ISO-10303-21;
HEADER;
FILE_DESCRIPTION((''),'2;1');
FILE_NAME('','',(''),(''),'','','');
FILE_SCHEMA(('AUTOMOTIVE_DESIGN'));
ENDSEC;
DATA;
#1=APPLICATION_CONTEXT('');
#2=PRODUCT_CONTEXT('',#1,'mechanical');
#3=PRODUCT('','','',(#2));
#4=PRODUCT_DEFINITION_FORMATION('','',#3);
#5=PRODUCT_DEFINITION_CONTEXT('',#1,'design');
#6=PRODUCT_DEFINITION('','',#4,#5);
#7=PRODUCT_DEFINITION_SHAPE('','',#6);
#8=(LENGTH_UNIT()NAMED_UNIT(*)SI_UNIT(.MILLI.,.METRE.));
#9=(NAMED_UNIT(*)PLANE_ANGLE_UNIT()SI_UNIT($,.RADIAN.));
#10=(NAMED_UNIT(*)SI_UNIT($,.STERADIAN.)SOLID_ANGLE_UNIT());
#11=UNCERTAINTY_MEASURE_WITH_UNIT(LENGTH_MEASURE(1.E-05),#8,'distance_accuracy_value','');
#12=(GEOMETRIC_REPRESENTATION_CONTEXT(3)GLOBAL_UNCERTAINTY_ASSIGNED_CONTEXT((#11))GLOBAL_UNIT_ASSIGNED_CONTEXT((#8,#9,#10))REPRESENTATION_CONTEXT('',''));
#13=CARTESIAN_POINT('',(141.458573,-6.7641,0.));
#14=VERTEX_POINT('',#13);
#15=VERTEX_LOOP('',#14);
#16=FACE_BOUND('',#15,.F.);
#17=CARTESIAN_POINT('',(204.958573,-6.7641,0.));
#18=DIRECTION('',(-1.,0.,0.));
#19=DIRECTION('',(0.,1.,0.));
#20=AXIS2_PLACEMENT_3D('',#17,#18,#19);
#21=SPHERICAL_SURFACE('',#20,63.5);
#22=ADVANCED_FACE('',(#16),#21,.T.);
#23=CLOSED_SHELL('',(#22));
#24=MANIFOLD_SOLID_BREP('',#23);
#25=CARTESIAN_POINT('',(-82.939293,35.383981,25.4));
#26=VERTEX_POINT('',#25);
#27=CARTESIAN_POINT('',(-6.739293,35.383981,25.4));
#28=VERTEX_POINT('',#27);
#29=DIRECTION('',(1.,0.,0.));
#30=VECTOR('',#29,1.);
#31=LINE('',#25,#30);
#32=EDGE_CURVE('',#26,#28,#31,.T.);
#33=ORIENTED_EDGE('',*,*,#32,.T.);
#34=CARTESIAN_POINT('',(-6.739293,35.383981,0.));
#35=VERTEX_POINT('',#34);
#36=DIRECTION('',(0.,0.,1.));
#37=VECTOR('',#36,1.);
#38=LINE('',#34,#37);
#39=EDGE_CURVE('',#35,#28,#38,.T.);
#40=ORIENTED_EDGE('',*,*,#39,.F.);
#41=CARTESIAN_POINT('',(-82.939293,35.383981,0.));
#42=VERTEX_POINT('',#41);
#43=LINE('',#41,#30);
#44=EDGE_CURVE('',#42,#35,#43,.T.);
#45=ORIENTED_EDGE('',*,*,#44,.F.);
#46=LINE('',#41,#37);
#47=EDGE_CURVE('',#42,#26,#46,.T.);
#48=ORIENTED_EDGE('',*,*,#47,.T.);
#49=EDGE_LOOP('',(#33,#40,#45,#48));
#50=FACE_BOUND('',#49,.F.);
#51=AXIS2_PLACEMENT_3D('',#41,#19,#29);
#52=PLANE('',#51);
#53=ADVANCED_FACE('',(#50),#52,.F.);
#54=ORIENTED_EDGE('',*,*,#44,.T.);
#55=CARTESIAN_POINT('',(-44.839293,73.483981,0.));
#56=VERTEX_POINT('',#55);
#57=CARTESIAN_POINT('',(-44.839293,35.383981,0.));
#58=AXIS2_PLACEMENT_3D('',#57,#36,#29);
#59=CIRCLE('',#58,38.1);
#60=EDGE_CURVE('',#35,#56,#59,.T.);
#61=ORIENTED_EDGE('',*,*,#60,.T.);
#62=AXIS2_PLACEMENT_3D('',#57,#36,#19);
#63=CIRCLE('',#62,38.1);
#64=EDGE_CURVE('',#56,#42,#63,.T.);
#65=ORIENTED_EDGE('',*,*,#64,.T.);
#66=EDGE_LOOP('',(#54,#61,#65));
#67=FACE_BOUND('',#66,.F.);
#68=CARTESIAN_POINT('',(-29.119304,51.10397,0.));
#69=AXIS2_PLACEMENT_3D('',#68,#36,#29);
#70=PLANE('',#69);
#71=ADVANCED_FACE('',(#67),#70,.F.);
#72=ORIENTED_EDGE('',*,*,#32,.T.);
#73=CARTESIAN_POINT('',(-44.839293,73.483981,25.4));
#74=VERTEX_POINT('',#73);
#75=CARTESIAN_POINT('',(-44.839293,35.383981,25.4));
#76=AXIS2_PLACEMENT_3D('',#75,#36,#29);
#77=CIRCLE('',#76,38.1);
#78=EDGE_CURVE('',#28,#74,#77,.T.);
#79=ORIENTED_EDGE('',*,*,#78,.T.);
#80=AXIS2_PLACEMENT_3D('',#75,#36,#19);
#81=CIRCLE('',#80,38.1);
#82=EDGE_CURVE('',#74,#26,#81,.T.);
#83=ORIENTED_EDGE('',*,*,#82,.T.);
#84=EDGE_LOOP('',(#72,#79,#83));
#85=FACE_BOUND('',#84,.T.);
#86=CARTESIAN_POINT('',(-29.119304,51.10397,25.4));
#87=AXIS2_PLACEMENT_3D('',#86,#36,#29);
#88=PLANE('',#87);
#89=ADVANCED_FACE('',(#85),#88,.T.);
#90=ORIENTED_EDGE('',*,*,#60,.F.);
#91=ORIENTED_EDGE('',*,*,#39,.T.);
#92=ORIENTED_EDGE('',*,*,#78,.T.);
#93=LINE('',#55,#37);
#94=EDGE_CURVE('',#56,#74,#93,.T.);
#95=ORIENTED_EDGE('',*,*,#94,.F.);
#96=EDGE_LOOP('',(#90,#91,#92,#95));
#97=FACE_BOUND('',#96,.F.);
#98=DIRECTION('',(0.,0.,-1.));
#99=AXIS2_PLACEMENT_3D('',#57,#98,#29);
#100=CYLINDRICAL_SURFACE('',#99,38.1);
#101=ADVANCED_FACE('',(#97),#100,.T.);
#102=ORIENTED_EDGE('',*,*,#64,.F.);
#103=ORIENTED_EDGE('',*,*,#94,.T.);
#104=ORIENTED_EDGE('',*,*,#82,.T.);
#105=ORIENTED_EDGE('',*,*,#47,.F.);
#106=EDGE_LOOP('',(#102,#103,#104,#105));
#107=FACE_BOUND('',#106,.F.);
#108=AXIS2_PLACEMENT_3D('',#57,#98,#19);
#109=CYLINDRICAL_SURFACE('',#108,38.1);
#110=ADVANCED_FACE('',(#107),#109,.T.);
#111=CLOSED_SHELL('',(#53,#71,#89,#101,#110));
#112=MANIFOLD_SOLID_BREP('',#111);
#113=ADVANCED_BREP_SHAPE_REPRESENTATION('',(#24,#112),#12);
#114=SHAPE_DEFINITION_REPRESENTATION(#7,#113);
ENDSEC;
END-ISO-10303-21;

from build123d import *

# Parameters (mm, degrees)
F1_DEPTH = 25.4


with BuildPart() as f1:
    # F0 (on Top) → F1 (new body)
    with BuildSketch(Plane.XY):
        with BuildLine():
            Line((-44.8392927647, 35.3839807212), (-6.7392927647, 35.3839807212))
            ThreePointArc((-6.7392927647, 35.3839807212), (-17.8985244015, 62.3247490844), (-44.8392927647, 73.4839807212))
            Line((-44.8392927647, 73.4839807212), (-44.8392927647, 35.3839807212))
        make_face()
        with BuildLine():
            Line((-44.8392927647, 35.3839807212), (-44.8392927647, 73.4839807212))
            ThreePointArc((-44.8392927647, 73.4839807212), (-71.7800611279, 62.3247490844), (-82.9392927647, 35.3839807212))
            Line((-82.9392927647, 35.3839807212), (-44.8392927647, 35.3839807212))
        make_face()
    extrude(amount=F1_DEPTH)


with BuildPart() as f3:
    # F2 (on Top) → F3 (revolve)
    with BuildSketch(Plane.XY):
        with BuildLine():
            Line((141.4585729837, -6.7641003989), (268.4585729837, -6.7641003989))
            ThreePointArc((268.4585729837, -6.7641003989), (204.9585729837, 56.7358996011), (141.4585729837, -6.7641003989))
        make_face()
    revolve(axis=Axis((204.9585729837, -6.7641003989, 0), (1, 0, 0)))


solid = Compound([f1.part, f3.part])
